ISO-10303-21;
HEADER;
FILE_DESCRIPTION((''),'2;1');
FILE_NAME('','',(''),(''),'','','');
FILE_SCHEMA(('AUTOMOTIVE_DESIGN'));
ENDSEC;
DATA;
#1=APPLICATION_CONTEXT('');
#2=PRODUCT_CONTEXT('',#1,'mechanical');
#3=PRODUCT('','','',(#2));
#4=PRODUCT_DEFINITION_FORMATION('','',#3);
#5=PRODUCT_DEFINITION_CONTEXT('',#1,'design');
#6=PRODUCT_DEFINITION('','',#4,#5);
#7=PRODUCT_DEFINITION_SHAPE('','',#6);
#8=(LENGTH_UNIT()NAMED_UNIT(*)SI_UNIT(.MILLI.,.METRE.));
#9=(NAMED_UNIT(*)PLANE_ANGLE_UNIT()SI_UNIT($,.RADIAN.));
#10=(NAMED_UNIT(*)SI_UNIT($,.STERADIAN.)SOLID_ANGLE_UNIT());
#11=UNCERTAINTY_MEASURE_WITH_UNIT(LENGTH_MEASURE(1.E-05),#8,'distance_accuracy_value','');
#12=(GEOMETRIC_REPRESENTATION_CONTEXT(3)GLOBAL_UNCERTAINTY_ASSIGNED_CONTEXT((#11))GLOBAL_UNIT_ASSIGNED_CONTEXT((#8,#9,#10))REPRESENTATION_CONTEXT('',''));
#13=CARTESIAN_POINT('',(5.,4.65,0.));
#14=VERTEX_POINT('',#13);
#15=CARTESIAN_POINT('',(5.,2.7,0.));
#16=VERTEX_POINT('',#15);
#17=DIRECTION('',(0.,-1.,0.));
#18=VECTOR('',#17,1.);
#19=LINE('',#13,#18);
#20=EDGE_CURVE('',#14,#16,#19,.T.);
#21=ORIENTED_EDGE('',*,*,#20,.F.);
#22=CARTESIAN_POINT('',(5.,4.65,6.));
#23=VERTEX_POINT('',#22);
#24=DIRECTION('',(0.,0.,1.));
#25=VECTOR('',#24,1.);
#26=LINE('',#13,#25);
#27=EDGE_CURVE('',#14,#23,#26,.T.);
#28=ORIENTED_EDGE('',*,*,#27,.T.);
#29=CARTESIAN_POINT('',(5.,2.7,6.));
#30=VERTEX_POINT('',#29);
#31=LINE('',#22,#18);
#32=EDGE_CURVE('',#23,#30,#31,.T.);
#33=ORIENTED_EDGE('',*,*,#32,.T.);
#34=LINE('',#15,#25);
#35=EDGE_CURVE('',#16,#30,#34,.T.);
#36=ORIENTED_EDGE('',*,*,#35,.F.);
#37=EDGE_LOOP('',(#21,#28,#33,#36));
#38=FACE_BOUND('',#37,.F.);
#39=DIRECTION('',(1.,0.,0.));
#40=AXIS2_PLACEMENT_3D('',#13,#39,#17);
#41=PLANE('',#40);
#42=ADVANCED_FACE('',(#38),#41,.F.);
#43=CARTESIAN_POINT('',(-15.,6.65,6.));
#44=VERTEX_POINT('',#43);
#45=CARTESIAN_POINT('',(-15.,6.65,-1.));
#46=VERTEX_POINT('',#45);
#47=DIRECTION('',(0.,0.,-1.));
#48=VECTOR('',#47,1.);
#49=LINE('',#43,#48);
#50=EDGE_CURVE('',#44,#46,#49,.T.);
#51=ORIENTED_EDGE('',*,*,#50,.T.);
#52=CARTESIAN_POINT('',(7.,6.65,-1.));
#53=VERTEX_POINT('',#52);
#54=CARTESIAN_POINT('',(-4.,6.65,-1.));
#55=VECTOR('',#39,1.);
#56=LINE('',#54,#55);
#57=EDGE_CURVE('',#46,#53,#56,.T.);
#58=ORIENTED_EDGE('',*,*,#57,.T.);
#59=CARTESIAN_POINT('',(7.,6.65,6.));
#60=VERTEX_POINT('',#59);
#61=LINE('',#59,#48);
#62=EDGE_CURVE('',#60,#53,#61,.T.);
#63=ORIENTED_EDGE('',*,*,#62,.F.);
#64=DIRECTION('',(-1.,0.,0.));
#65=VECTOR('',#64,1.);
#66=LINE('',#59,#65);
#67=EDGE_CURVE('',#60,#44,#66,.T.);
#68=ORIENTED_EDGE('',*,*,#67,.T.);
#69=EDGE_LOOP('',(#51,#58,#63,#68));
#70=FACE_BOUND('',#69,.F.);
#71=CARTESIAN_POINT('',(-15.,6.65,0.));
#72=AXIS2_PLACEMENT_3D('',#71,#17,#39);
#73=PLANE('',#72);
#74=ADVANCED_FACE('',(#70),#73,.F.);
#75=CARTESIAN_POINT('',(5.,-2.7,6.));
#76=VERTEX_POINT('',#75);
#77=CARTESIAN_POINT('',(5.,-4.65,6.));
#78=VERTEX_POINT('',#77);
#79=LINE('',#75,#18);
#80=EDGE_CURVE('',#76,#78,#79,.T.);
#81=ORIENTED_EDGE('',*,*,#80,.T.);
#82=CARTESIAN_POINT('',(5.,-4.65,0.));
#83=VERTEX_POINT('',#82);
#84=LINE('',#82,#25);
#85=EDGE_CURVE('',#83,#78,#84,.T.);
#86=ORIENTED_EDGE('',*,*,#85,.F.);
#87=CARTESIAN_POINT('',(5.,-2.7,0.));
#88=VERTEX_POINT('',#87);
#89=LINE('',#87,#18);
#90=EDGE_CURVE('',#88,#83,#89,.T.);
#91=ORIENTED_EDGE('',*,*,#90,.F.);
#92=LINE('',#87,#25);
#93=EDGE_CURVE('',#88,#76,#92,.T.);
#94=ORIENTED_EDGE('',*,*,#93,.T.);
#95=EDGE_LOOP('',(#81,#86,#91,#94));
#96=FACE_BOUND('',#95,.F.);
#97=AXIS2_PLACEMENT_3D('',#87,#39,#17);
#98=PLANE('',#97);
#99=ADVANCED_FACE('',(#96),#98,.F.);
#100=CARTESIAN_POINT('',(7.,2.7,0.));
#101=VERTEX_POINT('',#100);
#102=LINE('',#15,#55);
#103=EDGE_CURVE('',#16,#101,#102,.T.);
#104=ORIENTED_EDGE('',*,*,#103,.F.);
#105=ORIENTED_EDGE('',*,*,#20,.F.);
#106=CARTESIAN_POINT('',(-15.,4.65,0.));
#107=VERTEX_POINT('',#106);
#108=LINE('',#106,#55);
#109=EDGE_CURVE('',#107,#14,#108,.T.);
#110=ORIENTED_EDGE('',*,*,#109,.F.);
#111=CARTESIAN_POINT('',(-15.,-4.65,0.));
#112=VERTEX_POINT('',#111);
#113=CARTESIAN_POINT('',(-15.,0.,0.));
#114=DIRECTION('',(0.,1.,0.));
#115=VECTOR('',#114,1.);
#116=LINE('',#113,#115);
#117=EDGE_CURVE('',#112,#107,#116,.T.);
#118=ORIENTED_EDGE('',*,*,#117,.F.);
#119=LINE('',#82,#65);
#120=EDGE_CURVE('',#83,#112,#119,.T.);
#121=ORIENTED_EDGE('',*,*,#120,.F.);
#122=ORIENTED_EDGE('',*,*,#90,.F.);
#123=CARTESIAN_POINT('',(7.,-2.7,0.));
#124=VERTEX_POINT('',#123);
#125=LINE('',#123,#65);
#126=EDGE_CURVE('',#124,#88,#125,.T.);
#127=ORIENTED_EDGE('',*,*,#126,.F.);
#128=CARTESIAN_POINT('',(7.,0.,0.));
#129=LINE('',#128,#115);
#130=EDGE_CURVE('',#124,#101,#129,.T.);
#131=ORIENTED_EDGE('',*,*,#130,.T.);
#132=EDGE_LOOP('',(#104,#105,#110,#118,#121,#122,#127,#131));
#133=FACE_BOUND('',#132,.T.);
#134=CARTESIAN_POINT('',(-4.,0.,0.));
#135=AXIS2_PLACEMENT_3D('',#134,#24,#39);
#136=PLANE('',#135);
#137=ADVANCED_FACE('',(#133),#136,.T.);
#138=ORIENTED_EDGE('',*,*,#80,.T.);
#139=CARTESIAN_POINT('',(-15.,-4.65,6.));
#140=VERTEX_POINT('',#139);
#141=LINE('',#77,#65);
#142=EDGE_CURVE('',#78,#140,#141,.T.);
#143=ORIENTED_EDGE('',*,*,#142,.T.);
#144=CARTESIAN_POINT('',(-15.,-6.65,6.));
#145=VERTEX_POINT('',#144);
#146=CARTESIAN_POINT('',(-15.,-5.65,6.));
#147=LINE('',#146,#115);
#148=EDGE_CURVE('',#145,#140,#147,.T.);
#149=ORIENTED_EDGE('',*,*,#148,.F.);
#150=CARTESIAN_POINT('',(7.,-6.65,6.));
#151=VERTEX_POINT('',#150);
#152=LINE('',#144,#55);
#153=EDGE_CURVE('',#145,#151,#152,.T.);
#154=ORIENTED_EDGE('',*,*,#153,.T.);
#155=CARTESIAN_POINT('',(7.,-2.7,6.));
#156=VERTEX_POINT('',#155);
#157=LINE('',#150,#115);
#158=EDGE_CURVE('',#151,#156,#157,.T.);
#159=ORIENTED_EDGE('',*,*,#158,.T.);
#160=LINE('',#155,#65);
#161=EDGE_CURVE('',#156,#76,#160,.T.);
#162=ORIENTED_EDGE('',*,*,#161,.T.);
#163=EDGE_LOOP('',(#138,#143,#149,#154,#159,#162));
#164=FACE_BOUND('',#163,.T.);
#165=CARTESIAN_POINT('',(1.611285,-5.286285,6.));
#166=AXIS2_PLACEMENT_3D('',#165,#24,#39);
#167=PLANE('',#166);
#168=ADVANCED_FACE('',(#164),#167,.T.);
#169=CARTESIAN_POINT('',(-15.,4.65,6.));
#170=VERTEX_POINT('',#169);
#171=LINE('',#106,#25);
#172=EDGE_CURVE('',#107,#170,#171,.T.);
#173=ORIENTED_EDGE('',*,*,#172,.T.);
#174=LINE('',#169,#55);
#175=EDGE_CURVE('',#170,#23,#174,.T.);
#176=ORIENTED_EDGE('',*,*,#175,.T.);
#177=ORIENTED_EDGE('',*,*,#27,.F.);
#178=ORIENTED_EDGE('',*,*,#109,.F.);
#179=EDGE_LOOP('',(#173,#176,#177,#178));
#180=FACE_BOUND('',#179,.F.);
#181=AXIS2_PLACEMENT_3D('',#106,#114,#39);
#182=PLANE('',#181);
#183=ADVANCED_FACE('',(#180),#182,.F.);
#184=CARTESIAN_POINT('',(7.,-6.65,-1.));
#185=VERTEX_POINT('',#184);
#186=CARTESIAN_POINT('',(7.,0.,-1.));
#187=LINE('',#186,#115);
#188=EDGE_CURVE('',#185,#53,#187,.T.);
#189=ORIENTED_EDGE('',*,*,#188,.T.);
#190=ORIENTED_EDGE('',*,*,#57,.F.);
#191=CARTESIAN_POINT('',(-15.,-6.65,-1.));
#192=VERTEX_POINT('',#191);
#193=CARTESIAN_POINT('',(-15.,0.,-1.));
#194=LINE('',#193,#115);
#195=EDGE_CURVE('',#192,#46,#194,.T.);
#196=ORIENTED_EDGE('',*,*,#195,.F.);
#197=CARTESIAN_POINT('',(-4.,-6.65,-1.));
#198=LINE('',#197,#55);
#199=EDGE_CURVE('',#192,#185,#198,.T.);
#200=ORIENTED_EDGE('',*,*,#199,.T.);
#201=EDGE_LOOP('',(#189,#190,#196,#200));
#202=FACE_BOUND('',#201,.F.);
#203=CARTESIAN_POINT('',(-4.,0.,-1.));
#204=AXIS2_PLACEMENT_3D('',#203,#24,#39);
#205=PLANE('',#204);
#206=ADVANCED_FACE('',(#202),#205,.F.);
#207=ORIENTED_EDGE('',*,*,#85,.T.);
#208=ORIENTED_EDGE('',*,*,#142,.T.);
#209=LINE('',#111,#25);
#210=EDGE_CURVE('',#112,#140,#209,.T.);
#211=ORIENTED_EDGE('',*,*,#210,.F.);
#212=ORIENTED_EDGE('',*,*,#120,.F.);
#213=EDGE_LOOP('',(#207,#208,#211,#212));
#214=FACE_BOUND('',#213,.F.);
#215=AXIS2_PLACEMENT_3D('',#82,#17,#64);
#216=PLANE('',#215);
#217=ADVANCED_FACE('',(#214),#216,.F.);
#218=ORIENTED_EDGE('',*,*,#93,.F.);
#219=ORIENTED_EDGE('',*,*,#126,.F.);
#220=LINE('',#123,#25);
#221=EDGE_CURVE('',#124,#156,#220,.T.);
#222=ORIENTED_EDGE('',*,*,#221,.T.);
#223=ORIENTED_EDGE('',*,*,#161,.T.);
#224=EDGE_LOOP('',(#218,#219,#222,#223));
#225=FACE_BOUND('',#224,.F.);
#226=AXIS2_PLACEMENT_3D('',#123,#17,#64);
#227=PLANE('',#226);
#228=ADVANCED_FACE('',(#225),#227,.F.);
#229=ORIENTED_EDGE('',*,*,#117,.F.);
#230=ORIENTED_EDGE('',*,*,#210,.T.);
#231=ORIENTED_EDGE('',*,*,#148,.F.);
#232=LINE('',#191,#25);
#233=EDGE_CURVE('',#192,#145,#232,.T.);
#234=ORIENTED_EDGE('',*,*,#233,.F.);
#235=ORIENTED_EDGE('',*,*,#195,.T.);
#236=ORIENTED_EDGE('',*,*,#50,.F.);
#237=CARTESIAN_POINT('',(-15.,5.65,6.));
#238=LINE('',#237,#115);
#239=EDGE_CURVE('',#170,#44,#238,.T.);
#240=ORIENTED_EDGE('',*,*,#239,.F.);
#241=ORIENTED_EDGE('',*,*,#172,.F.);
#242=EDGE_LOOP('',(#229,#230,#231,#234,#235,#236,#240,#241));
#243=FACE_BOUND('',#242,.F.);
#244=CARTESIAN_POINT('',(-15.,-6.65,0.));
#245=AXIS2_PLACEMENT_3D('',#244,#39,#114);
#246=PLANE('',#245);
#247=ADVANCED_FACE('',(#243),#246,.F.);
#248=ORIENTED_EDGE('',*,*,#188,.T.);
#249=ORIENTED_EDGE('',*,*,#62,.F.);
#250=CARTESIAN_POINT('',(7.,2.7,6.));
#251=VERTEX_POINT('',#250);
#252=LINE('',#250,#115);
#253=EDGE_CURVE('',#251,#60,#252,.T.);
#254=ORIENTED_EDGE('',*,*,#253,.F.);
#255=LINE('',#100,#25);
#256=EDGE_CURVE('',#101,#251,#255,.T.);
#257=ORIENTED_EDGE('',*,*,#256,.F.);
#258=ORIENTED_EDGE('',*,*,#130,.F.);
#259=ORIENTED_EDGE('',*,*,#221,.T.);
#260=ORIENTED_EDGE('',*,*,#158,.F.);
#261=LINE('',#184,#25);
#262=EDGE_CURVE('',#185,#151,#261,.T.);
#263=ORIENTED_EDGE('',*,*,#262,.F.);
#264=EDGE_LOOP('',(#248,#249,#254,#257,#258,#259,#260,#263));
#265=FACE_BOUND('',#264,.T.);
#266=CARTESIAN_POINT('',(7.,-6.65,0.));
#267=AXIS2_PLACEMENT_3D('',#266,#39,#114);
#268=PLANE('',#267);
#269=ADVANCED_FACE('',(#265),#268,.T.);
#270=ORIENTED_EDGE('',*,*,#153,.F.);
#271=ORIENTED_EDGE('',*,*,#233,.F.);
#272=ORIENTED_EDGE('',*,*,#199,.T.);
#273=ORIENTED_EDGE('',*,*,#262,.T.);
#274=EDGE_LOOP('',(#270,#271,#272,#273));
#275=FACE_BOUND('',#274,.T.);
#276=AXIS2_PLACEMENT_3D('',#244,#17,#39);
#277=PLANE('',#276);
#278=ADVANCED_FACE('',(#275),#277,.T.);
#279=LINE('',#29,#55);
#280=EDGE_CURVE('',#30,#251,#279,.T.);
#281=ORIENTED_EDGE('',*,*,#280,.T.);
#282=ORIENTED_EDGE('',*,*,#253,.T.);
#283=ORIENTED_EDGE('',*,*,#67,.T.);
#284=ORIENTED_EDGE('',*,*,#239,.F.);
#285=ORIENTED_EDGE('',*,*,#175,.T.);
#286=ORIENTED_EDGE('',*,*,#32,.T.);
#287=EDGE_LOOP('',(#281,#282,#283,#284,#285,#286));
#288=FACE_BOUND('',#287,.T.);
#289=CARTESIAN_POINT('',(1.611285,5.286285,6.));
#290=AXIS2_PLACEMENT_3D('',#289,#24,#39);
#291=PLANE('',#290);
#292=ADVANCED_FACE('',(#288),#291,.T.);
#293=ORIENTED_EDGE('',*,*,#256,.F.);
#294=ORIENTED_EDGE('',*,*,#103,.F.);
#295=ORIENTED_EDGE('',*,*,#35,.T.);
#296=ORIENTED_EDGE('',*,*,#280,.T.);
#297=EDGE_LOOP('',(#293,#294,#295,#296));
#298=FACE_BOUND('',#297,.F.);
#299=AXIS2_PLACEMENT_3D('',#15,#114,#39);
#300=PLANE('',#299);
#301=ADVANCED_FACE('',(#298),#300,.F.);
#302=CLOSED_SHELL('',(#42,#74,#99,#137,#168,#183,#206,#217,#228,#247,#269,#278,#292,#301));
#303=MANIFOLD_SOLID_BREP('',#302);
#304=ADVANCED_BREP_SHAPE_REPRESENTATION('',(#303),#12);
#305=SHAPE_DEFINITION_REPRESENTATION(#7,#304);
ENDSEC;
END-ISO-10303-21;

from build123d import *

# Parameters (mm, degrees)
F0_W     = 10
F0_H     = 2
F1_DEPTH = 6
F2_W     = 22
F2_H     = 13.3
F3_DEPTH = 1


with BuildPart() as f1:
    # F0 (on Top) → F1 (new body)
    with BuildSketch(Plane.XY):
        Polygon((-5, 4.65), (5, 4.65), (5, 2.7), (7, 2.7), (7, 4.85), (7, 6.65), (5, 6.65), (-5, 6.65), align=None)
        with Locations((-10, 5.65)):
            Rectangle(F0_W, F0_H)
    extrude(amount=F1_DEPTH)



with BuildPart() as f1b:
    # F0 (on Top) → F1, piece 2 (new body)
    with BuildSketch(Plane.XY):
        Polygon((5, -4.65), (-5, -4.65), (-5, -6.65), (5, -6.65), (7, -6.65), (7, -4.85), (7, -2.7), (5, -2.7), align=None)
        with Locations((-10, -5.65)):
            Rectangle(F0_W, F0_H)
    extrude(amount=F1_DEPTH)


with BuildPart() as f1_1:
    add(f1.part)

    add(f1b.part)  # F3 merges F1b
    # F2 (on Top) → F3 (join)
    with BuildSketch(Plane.XY):
        with Locations((-4, 0)):
            Rectangle(F2_W, F2_H)
    extrude(amount=-F3_DEPTH)


solid = f1_1.part
